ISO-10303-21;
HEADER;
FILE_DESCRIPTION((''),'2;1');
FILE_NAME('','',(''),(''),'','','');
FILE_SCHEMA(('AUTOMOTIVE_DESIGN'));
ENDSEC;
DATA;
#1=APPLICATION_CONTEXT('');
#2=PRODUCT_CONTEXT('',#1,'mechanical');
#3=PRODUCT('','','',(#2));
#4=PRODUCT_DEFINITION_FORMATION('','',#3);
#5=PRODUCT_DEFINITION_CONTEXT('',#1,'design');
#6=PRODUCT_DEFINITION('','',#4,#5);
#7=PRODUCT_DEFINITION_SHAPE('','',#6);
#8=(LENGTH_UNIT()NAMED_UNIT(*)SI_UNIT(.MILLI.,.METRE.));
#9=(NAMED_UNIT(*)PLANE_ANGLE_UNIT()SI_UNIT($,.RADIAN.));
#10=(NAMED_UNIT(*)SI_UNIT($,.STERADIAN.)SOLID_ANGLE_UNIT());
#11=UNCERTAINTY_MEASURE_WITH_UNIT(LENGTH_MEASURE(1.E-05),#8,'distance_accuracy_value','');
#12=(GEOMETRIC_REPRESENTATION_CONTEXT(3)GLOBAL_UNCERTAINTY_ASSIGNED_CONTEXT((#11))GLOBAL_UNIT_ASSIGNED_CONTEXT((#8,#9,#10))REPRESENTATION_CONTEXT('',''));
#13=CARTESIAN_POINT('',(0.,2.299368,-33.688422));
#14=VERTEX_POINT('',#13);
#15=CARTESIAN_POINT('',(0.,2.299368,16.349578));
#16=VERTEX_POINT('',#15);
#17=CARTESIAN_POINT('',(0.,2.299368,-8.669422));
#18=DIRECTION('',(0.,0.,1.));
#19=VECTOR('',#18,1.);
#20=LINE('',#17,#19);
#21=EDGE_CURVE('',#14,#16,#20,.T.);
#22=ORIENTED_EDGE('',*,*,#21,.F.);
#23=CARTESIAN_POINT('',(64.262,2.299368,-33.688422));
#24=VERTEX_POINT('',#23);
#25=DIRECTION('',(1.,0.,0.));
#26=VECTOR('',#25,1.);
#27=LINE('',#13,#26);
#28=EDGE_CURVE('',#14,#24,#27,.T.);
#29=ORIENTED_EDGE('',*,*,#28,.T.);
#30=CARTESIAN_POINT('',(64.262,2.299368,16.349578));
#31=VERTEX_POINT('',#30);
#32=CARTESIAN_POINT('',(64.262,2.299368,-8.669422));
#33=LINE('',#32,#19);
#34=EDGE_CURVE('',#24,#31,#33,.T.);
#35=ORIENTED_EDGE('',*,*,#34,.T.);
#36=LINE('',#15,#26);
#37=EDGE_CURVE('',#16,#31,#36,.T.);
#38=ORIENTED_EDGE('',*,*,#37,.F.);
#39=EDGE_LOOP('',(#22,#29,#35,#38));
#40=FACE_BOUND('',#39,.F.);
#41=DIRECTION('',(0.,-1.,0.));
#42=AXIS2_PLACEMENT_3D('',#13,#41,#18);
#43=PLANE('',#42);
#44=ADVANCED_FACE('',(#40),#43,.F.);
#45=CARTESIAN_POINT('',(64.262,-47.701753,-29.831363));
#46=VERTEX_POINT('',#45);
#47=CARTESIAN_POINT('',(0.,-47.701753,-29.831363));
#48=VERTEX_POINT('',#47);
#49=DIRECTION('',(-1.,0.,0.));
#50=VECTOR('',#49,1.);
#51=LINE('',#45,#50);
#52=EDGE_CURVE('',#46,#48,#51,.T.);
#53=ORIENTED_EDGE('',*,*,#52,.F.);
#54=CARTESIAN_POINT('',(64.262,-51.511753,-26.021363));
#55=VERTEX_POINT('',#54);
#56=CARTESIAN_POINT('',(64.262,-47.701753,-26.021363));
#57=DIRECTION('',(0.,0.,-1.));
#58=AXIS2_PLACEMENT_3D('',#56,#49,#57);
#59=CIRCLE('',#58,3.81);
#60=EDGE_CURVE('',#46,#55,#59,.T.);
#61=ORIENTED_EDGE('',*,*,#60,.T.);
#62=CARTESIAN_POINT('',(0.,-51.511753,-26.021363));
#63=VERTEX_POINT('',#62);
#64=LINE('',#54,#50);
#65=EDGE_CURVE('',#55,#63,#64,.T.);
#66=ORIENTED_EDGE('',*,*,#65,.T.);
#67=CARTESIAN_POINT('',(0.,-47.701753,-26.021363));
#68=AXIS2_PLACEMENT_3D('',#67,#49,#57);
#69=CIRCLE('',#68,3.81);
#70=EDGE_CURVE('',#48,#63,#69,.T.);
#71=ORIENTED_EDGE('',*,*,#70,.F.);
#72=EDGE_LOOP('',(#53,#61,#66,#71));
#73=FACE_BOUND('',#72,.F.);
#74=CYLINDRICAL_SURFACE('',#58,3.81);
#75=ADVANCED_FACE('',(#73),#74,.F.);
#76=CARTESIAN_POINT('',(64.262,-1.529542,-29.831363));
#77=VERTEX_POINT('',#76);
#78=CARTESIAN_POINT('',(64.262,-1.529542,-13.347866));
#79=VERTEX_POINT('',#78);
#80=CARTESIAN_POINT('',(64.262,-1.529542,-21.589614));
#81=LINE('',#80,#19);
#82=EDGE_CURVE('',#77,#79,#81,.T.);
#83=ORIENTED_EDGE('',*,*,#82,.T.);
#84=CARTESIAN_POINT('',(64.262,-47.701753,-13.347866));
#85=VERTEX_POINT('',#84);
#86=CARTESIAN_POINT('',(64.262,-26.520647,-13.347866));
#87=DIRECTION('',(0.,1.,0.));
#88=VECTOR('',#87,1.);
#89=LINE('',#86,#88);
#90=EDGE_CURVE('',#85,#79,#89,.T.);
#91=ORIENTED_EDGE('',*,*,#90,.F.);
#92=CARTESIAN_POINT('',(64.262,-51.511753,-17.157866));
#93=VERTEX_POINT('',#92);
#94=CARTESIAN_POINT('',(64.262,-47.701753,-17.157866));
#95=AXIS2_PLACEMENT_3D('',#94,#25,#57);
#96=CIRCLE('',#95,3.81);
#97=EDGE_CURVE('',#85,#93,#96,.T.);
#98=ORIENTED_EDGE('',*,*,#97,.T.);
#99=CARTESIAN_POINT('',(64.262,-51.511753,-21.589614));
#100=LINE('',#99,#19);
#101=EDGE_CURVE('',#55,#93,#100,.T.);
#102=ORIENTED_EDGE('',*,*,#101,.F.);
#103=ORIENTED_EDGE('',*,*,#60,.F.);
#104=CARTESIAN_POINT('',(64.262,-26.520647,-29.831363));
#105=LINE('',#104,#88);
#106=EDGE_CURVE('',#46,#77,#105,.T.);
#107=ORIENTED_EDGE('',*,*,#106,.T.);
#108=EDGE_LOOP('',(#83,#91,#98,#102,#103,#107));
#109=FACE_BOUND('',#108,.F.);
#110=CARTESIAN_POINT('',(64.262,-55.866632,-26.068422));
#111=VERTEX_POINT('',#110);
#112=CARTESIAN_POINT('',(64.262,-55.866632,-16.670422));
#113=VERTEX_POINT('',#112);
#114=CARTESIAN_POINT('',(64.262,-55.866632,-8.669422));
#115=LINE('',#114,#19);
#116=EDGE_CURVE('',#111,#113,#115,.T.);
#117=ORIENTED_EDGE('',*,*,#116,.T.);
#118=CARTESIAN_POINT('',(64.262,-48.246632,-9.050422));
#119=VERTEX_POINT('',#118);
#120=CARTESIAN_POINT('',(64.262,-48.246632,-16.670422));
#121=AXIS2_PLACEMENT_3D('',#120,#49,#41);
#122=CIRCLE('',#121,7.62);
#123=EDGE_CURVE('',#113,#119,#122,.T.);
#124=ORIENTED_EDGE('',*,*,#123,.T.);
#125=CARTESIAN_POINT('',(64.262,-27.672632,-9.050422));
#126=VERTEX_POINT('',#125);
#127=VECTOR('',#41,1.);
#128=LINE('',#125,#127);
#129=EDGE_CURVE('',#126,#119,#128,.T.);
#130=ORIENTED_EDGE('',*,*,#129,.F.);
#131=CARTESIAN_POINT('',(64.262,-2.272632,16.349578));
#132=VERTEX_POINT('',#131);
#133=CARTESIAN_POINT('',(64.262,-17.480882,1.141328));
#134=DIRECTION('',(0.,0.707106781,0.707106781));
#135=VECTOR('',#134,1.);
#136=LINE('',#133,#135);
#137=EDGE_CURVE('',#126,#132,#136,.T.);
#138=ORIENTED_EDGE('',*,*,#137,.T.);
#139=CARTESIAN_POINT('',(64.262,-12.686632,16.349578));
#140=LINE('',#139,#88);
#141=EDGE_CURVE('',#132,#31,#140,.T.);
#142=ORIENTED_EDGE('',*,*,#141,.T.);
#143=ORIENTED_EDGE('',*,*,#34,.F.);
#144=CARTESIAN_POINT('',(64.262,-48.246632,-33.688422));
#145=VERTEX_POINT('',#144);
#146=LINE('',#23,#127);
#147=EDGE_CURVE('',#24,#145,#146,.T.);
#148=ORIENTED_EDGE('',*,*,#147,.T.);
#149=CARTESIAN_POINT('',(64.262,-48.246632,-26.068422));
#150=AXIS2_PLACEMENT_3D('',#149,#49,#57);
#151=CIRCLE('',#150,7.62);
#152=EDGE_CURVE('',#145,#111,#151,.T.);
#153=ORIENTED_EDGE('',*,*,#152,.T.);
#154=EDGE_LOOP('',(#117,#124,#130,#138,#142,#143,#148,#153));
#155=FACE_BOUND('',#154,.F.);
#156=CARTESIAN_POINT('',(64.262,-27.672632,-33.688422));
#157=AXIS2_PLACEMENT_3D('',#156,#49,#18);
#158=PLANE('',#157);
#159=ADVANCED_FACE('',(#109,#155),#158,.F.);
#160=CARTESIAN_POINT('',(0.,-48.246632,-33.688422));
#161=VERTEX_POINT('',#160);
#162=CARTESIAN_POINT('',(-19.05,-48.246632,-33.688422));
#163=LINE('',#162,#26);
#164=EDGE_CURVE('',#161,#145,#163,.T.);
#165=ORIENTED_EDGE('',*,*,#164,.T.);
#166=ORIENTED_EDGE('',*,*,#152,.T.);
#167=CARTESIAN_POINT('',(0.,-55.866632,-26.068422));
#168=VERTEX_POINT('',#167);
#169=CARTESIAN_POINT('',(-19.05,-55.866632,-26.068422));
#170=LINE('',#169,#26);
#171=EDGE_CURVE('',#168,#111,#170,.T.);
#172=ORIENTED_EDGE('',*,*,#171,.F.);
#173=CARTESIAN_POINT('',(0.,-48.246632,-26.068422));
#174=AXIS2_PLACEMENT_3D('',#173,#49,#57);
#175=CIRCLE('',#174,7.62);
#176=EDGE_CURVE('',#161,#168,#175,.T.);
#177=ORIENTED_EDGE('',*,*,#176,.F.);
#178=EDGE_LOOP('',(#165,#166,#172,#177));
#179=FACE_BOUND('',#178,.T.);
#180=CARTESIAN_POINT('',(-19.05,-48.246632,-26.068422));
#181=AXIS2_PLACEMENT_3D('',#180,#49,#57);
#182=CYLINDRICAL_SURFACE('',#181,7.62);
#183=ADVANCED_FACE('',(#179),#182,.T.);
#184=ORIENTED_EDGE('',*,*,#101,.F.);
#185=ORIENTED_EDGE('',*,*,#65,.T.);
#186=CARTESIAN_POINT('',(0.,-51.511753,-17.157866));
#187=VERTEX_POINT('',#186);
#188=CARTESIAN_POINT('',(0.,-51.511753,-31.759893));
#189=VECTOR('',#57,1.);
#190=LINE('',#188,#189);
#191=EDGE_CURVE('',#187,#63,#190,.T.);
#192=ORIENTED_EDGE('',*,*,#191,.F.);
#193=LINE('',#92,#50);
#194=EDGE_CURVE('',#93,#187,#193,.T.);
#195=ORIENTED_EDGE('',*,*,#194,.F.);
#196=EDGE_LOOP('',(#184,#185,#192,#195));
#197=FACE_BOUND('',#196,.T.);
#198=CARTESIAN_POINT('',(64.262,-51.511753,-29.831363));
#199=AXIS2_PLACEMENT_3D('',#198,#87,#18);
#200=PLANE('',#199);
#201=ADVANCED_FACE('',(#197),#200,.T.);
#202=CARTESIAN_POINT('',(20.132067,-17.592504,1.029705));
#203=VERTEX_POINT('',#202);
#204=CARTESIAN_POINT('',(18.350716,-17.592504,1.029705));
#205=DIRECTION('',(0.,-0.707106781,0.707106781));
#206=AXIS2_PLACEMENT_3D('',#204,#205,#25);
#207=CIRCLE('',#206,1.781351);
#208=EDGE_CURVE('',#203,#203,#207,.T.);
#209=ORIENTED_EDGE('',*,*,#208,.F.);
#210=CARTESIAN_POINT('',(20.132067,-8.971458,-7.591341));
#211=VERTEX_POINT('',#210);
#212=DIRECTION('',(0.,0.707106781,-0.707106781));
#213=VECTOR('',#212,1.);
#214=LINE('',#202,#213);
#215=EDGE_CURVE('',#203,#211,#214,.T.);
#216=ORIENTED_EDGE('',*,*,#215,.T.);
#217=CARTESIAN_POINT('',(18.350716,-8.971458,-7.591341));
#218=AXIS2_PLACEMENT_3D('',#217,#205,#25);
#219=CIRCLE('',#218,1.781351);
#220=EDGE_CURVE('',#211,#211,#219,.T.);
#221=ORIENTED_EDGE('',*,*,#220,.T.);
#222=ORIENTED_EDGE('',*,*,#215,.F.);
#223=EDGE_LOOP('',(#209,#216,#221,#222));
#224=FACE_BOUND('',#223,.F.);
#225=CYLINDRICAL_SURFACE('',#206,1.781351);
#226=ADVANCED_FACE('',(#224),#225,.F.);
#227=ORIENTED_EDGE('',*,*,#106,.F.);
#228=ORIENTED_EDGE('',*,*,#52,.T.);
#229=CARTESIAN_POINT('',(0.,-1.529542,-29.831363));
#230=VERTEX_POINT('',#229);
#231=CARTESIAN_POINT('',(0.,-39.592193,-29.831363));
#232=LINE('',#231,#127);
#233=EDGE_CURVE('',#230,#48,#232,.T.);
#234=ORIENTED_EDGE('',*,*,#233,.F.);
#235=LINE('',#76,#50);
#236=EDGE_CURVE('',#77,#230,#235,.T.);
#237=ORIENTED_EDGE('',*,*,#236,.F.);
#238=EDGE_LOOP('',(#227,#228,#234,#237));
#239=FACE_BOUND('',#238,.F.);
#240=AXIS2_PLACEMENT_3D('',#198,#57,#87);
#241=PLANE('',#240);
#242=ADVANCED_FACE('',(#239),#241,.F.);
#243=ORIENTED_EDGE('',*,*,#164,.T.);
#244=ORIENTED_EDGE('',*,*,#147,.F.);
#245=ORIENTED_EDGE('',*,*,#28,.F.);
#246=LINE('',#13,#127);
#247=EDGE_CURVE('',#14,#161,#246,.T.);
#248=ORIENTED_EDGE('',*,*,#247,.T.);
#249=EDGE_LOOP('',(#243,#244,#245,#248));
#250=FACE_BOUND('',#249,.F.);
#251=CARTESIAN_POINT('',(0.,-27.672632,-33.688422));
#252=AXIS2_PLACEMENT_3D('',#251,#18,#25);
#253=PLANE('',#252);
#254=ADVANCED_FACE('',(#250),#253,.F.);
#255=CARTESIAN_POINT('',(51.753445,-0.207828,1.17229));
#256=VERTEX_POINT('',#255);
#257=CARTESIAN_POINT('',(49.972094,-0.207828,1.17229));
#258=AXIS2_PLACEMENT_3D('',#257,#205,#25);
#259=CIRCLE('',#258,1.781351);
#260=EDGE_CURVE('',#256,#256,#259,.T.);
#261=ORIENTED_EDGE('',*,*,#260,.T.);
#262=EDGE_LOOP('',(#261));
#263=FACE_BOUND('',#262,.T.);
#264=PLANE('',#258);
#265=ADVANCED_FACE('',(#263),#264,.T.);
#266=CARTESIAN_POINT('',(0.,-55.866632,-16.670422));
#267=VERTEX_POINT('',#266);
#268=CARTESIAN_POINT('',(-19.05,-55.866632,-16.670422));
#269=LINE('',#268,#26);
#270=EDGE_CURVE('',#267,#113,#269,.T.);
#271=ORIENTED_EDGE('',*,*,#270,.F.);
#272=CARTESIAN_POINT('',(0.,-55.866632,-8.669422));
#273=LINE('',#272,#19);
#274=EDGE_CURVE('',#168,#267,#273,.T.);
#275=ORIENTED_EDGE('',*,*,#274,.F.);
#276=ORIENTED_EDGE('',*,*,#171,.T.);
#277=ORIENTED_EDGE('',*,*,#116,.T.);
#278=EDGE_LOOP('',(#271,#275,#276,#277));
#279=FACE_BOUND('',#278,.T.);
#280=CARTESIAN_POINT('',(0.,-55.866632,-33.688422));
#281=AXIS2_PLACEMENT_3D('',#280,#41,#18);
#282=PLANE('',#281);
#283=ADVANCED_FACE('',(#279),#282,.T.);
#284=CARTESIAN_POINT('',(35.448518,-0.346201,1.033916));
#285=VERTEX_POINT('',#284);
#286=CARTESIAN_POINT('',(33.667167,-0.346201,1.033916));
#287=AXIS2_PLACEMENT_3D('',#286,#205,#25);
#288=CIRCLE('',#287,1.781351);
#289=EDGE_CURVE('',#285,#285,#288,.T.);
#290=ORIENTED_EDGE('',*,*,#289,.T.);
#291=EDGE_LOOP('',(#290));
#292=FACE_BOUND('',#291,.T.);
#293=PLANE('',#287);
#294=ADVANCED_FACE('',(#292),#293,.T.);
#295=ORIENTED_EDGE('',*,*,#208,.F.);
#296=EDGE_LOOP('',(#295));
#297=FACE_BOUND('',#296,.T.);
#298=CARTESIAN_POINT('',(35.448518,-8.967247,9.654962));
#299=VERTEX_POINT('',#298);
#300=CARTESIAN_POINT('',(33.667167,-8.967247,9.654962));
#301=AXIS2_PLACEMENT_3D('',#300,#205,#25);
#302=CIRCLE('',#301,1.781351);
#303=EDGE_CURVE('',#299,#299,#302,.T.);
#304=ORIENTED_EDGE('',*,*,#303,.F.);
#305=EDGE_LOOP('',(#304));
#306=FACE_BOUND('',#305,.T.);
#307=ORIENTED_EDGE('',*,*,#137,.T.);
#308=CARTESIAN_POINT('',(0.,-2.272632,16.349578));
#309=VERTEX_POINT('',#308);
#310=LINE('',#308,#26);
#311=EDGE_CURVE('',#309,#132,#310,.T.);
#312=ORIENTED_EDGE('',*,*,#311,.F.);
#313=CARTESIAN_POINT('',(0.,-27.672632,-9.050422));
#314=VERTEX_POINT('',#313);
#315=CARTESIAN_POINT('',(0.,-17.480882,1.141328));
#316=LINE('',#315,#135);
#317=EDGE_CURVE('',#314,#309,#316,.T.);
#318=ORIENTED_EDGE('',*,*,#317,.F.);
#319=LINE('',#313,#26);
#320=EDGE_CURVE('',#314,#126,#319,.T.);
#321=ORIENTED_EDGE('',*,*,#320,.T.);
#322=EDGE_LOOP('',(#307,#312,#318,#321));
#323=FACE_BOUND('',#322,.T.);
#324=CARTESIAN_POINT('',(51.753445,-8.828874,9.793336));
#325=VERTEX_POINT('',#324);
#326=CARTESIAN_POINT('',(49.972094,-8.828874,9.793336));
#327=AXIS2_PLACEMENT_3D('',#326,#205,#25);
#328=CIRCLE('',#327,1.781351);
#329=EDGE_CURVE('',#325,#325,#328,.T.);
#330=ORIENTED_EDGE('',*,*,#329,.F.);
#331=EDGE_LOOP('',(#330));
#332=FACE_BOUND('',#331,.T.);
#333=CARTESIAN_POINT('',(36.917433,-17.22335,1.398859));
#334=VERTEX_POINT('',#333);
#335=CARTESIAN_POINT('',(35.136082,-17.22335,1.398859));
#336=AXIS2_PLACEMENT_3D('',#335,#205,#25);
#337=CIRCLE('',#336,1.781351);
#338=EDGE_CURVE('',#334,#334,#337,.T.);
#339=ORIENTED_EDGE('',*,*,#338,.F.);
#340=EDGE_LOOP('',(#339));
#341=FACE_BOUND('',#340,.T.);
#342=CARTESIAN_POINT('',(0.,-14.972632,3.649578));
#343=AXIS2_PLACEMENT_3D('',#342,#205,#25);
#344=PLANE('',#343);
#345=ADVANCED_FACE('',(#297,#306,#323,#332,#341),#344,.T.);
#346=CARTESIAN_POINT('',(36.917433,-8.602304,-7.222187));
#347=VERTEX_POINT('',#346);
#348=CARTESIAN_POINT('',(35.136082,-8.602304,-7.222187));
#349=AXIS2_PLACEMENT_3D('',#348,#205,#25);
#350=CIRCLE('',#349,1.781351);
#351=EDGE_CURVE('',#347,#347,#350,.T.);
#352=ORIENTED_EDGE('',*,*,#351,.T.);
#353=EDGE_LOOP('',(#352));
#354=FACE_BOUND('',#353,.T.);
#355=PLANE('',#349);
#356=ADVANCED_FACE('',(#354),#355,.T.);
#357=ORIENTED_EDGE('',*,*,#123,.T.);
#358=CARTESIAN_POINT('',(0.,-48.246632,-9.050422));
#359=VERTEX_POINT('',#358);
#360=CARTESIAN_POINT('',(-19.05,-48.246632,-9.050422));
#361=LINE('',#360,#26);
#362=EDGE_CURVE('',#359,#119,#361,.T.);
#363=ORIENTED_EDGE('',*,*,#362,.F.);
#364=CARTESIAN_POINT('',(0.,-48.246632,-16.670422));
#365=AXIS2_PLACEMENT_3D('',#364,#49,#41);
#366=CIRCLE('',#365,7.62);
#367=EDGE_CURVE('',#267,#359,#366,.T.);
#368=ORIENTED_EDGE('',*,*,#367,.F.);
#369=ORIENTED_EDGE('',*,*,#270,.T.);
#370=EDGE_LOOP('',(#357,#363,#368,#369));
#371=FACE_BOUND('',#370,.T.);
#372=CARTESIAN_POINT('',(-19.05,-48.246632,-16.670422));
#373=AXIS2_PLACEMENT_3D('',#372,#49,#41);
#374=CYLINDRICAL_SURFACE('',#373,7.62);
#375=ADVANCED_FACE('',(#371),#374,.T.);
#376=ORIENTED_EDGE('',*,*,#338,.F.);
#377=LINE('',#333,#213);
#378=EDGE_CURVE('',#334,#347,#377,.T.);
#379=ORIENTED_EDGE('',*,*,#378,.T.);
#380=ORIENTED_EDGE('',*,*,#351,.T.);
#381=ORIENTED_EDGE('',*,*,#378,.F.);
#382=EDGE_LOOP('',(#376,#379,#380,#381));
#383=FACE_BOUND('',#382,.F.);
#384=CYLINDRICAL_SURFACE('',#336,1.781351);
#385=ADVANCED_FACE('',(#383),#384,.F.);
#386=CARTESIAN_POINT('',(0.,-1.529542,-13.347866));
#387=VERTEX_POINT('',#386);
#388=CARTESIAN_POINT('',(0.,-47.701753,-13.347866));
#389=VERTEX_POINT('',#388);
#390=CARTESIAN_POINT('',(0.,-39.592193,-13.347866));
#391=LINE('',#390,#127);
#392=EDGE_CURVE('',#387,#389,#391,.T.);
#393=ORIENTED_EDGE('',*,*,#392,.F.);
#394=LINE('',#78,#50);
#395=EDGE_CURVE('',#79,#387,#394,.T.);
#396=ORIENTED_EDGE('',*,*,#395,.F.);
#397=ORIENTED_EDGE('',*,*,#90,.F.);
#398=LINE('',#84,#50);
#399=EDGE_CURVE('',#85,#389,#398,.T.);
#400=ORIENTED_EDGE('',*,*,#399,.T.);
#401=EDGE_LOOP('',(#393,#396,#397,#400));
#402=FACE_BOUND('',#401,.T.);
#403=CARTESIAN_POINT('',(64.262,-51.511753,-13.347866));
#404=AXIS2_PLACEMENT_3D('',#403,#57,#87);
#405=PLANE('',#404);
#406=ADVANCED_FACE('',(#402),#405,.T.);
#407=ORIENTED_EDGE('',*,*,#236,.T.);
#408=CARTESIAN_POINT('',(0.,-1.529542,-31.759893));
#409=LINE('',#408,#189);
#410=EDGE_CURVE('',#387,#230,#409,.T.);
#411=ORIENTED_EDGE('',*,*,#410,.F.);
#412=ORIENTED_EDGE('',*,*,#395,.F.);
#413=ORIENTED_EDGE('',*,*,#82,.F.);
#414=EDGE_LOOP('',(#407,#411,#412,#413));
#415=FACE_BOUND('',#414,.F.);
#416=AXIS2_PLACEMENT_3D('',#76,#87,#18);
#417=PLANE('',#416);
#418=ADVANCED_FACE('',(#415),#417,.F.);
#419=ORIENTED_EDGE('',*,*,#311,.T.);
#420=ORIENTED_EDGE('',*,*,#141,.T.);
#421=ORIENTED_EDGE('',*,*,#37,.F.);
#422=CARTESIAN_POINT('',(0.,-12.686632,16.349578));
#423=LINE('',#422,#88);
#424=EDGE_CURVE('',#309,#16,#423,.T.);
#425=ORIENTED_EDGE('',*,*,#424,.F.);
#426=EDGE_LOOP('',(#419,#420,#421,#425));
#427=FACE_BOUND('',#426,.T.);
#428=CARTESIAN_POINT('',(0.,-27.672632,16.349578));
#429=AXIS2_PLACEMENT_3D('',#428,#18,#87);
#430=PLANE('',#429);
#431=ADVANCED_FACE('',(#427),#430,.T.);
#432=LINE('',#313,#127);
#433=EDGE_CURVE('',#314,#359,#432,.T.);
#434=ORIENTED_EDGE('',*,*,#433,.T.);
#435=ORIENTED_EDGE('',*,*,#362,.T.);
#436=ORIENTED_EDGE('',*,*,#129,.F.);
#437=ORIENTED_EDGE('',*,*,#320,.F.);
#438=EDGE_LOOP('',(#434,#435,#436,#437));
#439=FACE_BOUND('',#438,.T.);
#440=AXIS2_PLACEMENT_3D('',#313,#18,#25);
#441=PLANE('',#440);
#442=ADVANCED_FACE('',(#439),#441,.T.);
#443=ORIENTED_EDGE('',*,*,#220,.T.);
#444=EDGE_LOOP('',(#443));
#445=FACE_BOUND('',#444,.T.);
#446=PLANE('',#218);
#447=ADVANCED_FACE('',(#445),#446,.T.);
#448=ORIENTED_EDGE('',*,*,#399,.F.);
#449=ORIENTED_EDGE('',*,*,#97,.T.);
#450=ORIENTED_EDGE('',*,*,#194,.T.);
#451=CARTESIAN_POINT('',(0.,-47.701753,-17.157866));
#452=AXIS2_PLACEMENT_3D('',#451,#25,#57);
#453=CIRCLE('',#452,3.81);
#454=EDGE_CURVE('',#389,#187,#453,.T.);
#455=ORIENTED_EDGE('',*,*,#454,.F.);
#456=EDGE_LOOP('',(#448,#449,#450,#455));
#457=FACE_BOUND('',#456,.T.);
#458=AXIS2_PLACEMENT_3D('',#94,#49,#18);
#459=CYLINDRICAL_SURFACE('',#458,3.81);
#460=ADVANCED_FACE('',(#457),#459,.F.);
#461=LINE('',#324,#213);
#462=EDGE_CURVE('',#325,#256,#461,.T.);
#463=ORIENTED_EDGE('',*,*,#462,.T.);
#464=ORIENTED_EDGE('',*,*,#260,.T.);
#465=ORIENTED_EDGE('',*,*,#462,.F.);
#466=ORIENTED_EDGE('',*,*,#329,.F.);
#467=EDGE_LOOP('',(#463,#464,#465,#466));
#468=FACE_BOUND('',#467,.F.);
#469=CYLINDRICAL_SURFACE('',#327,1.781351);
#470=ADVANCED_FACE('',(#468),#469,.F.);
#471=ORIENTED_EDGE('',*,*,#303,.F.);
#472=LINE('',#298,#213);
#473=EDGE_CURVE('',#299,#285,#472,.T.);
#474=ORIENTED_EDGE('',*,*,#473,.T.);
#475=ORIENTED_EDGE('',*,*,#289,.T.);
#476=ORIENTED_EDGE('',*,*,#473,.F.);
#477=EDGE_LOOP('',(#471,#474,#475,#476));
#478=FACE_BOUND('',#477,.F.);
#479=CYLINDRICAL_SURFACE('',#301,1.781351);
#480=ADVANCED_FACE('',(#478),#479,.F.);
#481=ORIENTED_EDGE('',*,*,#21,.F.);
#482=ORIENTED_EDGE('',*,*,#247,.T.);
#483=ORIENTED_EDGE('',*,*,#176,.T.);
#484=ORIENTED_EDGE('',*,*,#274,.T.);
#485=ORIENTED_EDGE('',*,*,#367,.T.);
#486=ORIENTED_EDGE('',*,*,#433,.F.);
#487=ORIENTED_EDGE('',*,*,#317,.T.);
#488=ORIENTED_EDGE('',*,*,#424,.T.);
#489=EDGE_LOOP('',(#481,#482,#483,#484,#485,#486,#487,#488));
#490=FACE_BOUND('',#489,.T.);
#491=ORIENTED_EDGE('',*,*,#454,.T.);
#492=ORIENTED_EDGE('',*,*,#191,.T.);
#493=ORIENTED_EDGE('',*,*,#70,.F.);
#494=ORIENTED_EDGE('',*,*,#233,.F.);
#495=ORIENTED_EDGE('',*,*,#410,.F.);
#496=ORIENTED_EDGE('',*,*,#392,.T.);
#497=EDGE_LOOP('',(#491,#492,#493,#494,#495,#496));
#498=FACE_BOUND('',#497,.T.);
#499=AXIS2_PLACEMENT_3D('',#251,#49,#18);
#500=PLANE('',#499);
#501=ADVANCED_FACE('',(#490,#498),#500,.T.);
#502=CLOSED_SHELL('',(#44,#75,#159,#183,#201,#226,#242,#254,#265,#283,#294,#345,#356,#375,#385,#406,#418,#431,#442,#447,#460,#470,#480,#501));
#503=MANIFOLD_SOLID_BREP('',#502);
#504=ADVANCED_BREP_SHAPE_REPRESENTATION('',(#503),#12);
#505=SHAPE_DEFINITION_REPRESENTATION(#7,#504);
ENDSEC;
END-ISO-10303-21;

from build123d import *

# Parameters (mm, degrees)
F0_W        = 29.972
F0_H        = 50.038
F1_DEPTH    = 64.262
F2_SIZE     = 25.4
F3_DEPTH    = 28.194
F4_T1_DEPTH = 102.362
F5_R        = 1.7813508629
F6_DEPTH    = 12.192
F7_W        = 49.9822117854
F7_H        = 16.4834968746
F8_DEPTH    = 137.16
F9_R        = 3.81


# Not quite as in the source:
# - a fillet or chamfer that OpenCascade refuses, or shapes differently, is made with other operations: its cross-section is extruded or revolved along the edge and cut away or added


with BuildPart() as f1:
    # F0 (on Right) → F1 (new body)
    with BuildSketch(Plane.YZ):
        with Locations((-12.6866316661, -8.6694222925)):
            Rectangle(F0_W, F0_H)
    extrude(amount=F1_DEPTH)

    # F2
    f2_edges = [f1.edges().sort_by_distance(p)[0] for p in [
        (32.131, -27.672632, 16.349578),
    ]]
    chamfer(f2_edges, length=F2_SIZE)

    # F3 (add): a face of the model
    f3_faces = [f1.faces().sort_by_distance(p)[0] for p in [
        (32.131, -27.6726316661, -21.3694222925),
    ]]
    extrude(f3_faces, amount=F3_DEPTH)

    # F4: fillet of radius 7.62 on 4 edges, made by hand

    # F4_s2 → F4_t1 (cut)
    with BuildSketch(Plane.YZ.offset(-19.05)):
        with BuildLine():
            ThreePointArc((-48.2466316661, -33.6884222925), (-53.6347853387, -31.4565759651), (-55.8666316661, -26.0684222925))
            Line((-55.8666316661, -26.0684222925), (-55.8666316661, -33.6884222925))
            Line((-55.8666316661, -33.6884222925), (-48.2466316661, -33.6884222925))
        make_face()
        with BuildLine():
            ThreePointArc((-55.8666316661, -16.6704222925), (-53.6347853387, -11.2822686198), (-48.2466316661, -9.0504222925))
            Line((-48.2466316661, -9.0504222925), (-55.8666316661, -9.0504222925))
            Line((-55.8666316661, -9.0504222925), (-55.8666316661, -16.6704222925))
        make_face()
    extrude(amount=F4_T1_DEPTH, mode=Mode.SUBTRACT)

    # F5 (on face) → F6 (cut)
    with BuildSketch(Plane(origin=(0, -9.3111046868, 9.3111046868), x_dir=(1, 0, 0), z_dir=(0, -0.7071067812, 0.7071067812))):
        with Locations((35.1360822096, -11.1896051094)):
            Circle(F5_R)
        with Locations((49.9720936641, 0.6819777191)):
            Circle(F5_R)
        with Locations((33.6671667174, 0.486287754)):
            Circle(F5_R)
        with Locations((18.350715749, -11.7116672918)):
            Circle(F5_R)
    extrude(amount=-F6_DEPTH, mode=Mode.SUBTRACT)

    # F7 (on face) → F8 (cut)
    with BuildSketch(Plane.YZ.offset(64.262)):
        with Locations((-26.5206474578, -21.5896144509)):
            Rectangle(F7_W, F7_H)
    extrude(amount=-F8_DEPTH, mode=Mode.SUBTRACT)

    # F9
    f9_edges = [f1.edges().sort_by_distance(p)[0] for p in [
        (32.131, -51.511753, -13.347866),
        (32.131, -51.511753, -29.831363),
    ]]
    fillet(f9_edges, radius=F9_R)


solid = f1.part
